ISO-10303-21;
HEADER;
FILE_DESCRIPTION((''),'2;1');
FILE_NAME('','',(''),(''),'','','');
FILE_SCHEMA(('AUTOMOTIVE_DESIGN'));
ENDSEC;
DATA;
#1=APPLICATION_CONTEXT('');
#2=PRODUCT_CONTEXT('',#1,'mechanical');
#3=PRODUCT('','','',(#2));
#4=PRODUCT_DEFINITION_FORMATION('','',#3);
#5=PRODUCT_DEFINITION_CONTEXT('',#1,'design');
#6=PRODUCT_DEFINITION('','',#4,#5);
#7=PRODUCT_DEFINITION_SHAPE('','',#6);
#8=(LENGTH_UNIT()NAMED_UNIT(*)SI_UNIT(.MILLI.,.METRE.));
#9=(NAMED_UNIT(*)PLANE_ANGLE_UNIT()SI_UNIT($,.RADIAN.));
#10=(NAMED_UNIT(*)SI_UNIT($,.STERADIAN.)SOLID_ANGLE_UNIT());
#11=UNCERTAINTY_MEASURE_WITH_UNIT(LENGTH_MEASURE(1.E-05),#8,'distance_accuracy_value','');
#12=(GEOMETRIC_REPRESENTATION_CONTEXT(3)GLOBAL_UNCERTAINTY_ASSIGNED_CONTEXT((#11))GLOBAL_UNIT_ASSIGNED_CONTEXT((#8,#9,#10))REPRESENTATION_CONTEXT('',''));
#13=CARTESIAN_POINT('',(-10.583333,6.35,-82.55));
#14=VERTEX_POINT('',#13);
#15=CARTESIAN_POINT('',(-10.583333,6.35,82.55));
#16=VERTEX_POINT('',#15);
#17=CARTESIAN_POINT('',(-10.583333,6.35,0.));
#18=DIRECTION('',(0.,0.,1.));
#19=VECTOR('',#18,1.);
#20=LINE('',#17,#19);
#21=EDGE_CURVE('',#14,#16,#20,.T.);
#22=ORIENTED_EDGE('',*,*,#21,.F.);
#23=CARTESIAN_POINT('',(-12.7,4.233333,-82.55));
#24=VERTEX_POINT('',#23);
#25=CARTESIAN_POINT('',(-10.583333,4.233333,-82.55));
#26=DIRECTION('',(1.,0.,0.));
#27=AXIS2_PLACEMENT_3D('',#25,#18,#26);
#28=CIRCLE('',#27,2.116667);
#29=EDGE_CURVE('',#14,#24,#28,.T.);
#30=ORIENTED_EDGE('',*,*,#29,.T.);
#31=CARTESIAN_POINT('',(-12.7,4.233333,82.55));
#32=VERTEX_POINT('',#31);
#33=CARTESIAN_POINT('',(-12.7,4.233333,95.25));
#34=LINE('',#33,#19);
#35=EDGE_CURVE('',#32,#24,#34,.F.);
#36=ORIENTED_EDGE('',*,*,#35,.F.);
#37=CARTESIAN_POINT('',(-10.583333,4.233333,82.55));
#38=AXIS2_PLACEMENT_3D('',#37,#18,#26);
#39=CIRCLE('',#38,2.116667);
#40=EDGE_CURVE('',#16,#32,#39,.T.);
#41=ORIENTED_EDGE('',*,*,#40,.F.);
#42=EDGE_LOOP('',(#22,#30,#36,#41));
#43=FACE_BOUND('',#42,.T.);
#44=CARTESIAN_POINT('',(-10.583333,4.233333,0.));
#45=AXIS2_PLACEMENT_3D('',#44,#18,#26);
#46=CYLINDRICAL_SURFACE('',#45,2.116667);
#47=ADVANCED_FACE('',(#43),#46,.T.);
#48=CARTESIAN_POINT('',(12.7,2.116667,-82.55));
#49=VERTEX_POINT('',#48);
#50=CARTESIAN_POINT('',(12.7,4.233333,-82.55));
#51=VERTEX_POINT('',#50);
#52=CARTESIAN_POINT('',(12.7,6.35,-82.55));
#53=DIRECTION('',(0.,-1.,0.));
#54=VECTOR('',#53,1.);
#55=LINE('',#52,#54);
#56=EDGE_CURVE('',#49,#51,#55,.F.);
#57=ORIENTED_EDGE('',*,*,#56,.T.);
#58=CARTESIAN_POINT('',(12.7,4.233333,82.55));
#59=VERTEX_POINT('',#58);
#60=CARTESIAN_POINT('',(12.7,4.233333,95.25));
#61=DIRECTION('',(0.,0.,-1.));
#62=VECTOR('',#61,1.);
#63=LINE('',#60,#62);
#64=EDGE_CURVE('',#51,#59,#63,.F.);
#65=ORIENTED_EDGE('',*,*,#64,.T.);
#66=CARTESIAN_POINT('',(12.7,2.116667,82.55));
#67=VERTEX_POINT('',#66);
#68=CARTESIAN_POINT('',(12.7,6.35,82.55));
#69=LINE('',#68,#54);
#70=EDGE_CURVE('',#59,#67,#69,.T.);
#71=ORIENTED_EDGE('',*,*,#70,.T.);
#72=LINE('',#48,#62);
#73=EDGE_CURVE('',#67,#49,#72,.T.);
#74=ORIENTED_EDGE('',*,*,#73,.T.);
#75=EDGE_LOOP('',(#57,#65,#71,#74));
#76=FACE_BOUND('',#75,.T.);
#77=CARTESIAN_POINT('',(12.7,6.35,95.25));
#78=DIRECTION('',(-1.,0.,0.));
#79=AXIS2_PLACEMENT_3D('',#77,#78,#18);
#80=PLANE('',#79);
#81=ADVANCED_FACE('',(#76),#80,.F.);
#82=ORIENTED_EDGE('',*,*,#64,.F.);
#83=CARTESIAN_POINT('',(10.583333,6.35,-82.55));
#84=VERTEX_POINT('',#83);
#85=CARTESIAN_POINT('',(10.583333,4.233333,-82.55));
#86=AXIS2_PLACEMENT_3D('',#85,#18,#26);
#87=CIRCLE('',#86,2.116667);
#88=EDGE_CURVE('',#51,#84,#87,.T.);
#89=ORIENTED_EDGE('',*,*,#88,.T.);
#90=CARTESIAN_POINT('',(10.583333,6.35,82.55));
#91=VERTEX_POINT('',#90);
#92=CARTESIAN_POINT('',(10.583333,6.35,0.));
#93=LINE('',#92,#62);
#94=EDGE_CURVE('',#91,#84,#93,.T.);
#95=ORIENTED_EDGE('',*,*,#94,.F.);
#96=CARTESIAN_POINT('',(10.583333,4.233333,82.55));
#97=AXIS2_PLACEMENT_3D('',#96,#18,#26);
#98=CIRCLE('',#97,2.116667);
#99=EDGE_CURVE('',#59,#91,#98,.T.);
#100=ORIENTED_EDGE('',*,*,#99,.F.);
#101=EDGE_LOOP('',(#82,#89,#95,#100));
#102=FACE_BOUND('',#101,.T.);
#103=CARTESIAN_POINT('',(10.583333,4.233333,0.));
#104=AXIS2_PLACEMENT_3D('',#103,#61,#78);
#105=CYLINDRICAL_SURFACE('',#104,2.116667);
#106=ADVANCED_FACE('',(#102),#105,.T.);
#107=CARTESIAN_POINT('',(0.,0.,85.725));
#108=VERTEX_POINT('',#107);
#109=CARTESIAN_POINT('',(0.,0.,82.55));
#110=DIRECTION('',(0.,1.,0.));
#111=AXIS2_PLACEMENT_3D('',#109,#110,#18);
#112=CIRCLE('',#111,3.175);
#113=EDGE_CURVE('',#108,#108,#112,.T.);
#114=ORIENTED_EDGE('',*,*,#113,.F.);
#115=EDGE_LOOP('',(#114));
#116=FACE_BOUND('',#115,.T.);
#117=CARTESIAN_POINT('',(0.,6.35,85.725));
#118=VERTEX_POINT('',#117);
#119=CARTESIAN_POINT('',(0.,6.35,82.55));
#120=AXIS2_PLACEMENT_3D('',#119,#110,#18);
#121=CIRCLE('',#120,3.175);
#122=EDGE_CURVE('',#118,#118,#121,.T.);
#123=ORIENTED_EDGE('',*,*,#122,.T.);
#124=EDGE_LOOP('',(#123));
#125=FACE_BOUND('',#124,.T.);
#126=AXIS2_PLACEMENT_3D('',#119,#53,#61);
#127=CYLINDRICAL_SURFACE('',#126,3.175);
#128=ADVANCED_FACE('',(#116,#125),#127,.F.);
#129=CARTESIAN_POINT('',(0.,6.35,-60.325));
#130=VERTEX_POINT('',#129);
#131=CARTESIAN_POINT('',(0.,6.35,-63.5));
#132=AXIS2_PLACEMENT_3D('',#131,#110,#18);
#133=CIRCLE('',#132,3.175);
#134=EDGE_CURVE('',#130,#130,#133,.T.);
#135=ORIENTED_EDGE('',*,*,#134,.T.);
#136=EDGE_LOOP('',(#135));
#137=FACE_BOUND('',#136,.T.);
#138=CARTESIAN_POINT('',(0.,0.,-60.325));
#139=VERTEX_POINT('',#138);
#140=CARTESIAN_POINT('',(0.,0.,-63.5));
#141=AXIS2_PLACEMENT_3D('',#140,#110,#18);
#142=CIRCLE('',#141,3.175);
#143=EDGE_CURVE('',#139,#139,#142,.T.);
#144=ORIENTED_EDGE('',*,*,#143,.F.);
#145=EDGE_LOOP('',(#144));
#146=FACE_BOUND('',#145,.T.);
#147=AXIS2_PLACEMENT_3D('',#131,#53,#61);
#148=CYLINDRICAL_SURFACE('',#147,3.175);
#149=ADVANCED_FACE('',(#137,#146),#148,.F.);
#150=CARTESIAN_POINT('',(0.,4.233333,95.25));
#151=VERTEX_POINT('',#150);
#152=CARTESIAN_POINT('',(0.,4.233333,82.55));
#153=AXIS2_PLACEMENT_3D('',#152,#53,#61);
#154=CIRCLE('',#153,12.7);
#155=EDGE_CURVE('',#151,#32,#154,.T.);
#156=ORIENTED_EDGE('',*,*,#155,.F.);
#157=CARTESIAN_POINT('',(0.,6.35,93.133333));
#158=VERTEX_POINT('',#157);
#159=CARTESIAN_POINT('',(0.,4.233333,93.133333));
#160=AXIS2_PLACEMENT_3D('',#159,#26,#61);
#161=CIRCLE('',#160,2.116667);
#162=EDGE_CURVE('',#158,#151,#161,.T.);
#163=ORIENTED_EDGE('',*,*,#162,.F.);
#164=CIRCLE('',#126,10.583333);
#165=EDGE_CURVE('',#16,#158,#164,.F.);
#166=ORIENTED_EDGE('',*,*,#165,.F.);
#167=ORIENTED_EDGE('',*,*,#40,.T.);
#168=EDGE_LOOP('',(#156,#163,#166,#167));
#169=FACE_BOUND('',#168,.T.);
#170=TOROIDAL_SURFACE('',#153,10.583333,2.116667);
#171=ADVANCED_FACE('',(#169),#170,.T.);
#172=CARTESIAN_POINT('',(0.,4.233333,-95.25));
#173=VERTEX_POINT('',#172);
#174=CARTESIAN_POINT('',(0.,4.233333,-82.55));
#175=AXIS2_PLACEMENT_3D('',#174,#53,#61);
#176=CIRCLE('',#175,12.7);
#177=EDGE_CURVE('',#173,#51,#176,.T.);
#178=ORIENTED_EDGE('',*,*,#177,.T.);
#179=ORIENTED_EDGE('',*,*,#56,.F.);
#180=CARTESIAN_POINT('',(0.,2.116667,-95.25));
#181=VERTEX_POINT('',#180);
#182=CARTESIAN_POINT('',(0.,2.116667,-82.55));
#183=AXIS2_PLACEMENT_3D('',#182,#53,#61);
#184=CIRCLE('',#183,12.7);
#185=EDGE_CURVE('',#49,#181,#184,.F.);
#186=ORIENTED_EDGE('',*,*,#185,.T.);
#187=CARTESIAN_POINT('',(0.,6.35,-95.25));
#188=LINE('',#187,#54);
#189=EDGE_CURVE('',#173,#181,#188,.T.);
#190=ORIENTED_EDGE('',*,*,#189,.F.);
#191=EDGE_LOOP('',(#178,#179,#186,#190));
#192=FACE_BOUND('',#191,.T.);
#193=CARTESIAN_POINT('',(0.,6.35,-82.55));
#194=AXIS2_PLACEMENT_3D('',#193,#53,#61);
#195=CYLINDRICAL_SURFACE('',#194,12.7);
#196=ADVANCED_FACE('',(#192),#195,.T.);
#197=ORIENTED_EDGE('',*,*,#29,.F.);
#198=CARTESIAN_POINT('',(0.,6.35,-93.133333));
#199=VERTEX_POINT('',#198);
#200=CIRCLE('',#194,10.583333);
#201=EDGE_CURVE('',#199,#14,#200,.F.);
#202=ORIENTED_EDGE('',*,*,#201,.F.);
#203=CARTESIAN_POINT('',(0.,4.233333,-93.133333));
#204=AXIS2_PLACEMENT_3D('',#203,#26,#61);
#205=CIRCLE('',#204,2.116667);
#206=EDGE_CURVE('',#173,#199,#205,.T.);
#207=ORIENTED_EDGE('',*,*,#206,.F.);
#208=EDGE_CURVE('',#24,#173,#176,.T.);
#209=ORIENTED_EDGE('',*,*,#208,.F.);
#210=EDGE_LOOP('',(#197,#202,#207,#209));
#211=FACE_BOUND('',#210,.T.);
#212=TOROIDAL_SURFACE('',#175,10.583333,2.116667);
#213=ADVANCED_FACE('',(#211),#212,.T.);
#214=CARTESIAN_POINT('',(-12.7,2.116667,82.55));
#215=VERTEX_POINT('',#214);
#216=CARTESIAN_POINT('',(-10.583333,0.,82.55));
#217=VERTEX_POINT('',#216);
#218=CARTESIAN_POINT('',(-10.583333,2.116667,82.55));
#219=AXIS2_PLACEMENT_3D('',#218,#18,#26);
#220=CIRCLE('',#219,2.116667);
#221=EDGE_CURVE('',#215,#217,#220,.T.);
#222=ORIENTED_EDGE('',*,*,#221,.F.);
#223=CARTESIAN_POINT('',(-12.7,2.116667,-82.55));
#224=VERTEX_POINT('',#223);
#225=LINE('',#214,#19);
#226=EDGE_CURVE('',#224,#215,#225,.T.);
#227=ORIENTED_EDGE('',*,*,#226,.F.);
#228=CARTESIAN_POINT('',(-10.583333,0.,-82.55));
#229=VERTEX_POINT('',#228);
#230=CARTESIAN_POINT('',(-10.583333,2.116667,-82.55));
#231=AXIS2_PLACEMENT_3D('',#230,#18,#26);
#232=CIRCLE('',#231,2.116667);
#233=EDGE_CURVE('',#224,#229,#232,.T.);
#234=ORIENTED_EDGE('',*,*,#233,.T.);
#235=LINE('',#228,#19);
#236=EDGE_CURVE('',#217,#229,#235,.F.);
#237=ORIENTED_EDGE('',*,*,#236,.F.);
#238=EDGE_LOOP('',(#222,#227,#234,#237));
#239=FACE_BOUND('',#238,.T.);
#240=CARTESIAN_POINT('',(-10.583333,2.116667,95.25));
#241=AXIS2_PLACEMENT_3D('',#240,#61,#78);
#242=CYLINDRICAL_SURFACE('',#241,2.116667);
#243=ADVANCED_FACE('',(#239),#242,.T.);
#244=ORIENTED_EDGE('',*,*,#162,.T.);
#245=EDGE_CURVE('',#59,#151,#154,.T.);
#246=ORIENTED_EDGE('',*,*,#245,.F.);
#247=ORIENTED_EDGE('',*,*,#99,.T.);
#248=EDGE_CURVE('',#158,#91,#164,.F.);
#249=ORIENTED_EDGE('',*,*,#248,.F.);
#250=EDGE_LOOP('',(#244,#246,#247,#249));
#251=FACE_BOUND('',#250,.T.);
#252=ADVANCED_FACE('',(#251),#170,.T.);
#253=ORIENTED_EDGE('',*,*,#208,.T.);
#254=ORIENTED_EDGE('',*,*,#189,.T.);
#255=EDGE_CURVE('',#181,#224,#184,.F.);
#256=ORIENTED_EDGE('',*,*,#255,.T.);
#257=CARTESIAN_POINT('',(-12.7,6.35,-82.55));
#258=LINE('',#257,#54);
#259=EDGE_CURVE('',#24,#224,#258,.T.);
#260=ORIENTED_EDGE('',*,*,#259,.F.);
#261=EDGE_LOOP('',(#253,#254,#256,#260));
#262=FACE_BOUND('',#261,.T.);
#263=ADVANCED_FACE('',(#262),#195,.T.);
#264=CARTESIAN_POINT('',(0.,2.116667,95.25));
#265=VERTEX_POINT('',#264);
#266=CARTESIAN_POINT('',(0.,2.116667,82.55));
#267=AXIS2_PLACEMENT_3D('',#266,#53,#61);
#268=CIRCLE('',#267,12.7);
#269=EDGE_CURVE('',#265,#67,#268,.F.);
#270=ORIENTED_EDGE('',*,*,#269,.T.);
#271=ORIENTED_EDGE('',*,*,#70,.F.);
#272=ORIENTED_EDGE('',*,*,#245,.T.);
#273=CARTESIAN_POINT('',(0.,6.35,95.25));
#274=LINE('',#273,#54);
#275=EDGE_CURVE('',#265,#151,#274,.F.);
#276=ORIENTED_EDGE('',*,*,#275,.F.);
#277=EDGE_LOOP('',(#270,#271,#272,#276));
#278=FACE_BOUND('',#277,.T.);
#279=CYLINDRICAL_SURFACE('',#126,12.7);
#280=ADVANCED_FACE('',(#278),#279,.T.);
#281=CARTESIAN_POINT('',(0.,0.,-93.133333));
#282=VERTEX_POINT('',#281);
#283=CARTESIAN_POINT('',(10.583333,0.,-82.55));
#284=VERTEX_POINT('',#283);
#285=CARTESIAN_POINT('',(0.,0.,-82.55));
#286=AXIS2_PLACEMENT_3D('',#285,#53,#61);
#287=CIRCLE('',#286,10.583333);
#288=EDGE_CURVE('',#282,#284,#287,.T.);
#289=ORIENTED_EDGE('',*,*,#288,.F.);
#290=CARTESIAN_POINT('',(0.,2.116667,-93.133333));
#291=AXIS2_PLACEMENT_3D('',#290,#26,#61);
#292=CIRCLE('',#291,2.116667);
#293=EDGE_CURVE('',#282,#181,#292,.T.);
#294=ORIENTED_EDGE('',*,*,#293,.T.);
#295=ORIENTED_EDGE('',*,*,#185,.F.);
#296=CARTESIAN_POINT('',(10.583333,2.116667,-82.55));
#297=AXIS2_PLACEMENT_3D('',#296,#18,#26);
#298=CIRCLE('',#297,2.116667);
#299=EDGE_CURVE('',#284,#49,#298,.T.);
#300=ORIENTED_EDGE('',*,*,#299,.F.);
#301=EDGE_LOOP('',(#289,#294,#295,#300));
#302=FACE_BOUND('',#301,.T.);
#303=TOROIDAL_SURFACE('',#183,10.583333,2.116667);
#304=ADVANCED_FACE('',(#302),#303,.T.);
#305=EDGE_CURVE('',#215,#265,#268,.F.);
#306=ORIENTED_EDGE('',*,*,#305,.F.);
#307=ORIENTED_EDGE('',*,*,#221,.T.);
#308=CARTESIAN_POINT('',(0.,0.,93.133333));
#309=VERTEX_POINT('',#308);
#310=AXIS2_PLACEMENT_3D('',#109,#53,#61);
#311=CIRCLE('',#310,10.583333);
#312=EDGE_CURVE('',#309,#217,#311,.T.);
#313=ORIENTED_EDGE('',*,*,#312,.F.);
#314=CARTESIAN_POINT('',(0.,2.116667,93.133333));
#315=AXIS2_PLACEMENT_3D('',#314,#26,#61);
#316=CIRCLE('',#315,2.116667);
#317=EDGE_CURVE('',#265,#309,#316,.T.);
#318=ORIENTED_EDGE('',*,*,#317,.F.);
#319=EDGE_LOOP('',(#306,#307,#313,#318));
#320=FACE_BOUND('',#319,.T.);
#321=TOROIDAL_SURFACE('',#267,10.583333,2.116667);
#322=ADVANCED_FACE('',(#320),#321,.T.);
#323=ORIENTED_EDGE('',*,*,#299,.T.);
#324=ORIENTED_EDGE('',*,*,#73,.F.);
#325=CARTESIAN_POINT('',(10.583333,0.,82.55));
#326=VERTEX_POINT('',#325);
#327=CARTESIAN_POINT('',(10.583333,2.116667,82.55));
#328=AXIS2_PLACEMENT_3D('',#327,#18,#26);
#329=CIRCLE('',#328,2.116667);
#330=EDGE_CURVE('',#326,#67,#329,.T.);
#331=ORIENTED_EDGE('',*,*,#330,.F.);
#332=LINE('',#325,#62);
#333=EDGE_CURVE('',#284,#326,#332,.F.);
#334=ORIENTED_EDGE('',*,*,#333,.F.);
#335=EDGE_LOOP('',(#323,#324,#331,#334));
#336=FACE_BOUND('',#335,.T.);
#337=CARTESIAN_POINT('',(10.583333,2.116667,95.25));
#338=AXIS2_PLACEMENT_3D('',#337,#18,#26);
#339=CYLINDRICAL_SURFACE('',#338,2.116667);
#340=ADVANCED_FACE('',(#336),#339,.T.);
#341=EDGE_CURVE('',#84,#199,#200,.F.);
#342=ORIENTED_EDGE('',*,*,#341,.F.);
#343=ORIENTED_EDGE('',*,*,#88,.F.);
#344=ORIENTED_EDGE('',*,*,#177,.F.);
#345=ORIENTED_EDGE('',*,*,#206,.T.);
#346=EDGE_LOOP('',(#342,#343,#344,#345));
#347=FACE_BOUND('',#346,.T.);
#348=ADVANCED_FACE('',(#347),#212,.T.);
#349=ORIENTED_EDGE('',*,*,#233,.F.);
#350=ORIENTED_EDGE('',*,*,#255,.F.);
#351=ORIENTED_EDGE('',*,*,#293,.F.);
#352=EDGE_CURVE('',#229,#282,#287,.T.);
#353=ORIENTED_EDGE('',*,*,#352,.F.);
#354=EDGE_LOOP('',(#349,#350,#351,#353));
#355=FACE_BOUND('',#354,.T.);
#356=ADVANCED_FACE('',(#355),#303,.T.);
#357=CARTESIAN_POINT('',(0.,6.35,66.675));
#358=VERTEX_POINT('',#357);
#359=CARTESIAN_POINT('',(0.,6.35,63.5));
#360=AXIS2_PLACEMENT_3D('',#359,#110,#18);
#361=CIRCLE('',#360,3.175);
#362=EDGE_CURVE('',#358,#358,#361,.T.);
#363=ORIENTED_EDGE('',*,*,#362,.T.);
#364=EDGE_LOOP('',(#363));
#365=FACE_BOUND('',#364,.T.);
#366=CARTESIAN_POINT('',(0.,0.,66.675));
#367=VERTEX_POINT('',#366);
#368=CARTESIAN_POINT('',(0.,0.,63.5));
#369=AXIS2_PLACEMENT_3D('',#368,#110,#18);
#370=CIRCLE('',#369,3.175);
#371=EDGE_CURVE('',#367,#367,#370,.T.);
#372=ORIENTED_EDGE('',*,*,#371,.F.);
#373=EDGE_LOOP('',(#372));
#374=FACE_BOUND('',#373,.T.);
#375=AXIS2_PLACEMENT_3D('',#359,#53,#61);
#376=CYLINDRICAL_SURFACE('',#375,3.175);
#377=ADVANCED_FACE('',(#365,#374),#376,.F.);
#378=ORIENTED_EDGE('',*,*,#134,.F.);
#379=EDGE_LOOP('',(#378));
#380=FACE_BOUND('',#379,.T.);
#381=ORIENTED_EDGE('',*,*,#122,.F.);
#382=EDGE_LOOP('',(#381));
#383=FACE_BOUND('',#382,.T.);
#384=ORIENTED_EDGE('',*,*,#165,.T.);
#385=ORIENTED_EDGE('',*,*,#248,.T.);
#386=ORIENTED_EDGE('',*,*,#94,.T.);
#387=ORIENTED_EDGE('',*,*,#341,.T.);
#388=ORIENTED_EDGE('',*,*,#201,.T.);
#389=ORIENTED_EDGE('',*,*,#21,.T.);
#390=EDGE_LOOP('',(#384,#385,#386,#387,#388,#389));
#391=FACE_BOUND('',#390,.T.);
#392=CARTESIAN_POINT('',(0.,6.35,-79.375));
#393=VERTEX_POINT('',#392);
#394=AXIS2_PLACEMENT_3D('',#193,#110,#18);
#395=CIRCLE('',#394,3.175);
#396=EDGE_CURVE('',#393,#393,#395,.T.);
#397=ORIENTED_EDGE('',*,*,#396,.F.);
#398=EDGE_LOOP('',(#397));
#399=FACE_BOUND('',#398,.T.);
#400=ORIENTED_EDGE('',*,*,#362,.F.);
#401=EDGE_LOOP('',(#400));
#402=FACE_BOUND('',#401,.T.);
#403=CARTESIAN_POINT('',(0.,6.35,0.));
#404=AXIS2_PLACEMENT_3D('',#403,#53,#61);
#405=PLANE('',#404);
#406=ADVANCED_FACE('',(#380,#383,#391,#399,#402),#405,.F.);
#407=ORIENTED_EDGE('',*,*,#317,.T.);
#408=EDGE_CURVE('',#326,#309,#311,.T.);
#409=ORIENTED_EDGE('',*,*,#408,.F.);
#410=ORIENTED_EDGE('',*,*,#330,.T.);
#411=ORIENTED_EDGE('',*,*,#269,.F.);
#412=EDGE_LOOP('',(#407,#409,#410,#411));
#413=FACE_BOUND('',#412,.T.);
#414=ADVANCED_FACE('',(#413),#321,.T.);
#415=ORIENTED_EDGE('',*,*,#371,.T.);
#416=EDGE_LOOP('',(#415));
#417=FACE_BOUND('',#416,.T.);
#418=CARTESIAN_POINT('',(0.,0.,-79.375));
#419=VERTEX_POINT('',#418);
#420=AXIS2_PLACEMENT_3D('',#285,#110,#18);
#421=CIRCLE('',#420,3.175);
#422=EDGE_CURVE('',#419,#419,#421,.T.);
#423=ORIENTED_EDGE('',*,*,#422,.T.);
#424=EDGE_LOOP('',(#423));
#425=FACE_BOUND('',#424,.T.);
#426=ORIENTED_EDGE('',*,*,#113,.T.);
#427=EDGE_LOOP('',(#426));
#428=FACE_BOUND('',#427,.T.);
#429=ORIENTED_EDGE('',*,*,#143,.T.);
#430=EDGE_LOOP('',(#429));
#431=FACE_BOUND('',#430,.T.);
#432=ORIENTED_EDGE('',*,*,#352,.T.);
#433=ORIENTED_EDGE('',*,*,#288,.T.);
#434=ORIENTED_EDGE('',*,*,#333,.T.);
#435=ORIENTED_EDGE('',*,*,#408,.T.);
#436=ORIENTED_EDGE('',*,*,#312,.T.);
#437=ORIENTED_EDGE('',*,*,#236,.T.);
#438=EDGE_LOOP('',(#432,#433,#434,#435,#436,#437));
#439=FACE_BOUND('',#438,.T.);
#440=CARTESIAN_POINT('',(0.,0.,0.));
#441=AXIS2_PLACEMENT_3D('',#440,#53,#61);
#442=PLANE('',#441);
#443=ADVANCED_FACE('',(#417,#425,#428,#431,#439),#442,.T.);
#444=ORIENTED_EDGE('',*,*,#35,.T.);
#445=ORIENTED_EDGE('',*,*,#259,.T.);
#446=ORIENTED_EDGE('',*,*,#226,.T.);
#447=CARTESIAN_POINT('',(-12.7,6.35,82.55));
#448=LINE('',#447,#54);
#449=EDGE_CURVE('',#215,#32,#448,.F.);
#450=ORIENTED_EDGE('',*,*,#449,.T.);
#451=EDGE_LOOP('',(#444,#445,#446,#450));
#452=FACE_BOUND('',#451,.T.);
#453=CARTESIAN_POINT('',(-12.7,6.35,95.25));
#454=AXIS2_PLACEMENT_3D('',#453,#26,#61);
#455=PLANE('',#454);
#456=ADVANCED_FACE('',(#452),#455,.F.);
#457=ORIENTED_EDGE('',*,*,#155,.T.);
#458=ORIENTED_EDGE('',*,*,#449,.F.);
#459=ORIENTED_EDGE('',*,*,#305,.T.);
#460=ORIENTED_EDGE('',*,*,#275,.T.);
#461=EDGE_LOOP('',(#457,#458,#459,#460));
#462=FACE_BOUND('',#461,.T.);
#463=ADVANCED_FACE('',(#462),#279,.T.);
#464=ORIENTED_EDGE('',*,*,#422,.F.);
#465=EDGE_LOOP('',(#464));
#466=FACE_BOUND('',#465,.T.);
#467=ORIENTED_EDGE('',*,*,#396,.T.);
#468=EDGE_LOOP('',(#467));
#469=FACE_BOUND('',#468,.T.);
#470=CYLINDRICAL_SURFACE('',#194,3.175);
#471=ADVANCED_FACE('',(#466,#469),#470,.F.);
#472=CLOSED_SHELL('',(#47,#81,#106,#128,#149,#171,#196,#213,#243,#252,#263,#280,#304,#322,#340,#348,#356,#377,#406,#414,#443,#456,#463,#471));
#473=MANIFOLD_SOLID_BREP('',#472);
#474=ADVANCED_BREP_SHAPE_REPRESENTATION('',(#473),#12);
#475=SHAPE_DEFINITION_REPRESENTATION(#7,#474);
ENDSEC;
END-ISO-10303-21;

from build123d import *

# Parameters (mm, degrees)
SKETCH1_W           = 25.4
SKETCH1_H           = 190.5
SKETCH1_R           = 3.175
BOSS_EXTRUDE1_DEPTH = 6.35
FILLET2_R           = 12.7
FILLET3_R           = 2.116666667


with BuildPart() as part:
    # Sketch1 → Boss-Extrude1 (new body)
    with BuildSketch(Plane(origin=(0, 0, 0), x_dir=(1, 0, 0), z_dir=(0, 1, 0))):
        Rectangle(SKETCH1_W, SKETCH1_H)
        with Locations(Location((0, -82.55, 0), (0, 0, 270))):
            Circle(SKETCH1_R, mode=Mode.SUBTRACT)
        with Locations(Location((0, 63.5, 0), (0, 0, 270))):
            Circle(SKETCH1_R, mode=Mode.SUBTRACT)
        with Locations(Location((0, 82.55, 0), (0, 0, 270))):
            Circle(SKETCH1_R, mode=Mode.SUBTRACT)
        with Locations(Location((0, -63.5, 0), (0, 0, 270))):
            Circle(SKETCH1_R, mode=Mode.SUBTRACT)
    extrude(amount=BOSS_EXTRUDE1_DEPTH)

    # Fillet2
    fillet2_edges = [part.edges().sort_by_distance(p)[0] for p in [
        (-12.7, 3.175, -95.25),
        (12.7, 3.175, -95.25),
        (-12.7, 3.175, 95.25),
        (12.7, 3.175, 95.25),
    ]]
    fillet(fillet2_edges, radius=FILLET2_R - 0.0001)  # a hair under: the kernel refuses the full size

    # Fillet3
    fillet3_edges = [part.edges().sort_by_distance(p)[0] for p in [
        (-12.7, 0, 0),
        (-12.7, 6.35, 0),
        (12.7, 0, 0),
        (8.98028541, 0, 91.53028541),
        (-8.98028541, 0, 91.53028541),
        (8.98028541, 0, -91.53028541),
        (-8.98028541, 0, -91.53028541),
        (12.7, 6.35, 0),
        (8.98028541, 6.35, 91.53028541),
        (-8.98028541, 6.35, 91.53028541),
        (8.98028541, 6.35, -91.53028541),
        (-8.98028541, 6.35, -91.53028541),
    ]]
    fillet(fillet3_edges, radius=FILLET3_R)


solid = part.part
